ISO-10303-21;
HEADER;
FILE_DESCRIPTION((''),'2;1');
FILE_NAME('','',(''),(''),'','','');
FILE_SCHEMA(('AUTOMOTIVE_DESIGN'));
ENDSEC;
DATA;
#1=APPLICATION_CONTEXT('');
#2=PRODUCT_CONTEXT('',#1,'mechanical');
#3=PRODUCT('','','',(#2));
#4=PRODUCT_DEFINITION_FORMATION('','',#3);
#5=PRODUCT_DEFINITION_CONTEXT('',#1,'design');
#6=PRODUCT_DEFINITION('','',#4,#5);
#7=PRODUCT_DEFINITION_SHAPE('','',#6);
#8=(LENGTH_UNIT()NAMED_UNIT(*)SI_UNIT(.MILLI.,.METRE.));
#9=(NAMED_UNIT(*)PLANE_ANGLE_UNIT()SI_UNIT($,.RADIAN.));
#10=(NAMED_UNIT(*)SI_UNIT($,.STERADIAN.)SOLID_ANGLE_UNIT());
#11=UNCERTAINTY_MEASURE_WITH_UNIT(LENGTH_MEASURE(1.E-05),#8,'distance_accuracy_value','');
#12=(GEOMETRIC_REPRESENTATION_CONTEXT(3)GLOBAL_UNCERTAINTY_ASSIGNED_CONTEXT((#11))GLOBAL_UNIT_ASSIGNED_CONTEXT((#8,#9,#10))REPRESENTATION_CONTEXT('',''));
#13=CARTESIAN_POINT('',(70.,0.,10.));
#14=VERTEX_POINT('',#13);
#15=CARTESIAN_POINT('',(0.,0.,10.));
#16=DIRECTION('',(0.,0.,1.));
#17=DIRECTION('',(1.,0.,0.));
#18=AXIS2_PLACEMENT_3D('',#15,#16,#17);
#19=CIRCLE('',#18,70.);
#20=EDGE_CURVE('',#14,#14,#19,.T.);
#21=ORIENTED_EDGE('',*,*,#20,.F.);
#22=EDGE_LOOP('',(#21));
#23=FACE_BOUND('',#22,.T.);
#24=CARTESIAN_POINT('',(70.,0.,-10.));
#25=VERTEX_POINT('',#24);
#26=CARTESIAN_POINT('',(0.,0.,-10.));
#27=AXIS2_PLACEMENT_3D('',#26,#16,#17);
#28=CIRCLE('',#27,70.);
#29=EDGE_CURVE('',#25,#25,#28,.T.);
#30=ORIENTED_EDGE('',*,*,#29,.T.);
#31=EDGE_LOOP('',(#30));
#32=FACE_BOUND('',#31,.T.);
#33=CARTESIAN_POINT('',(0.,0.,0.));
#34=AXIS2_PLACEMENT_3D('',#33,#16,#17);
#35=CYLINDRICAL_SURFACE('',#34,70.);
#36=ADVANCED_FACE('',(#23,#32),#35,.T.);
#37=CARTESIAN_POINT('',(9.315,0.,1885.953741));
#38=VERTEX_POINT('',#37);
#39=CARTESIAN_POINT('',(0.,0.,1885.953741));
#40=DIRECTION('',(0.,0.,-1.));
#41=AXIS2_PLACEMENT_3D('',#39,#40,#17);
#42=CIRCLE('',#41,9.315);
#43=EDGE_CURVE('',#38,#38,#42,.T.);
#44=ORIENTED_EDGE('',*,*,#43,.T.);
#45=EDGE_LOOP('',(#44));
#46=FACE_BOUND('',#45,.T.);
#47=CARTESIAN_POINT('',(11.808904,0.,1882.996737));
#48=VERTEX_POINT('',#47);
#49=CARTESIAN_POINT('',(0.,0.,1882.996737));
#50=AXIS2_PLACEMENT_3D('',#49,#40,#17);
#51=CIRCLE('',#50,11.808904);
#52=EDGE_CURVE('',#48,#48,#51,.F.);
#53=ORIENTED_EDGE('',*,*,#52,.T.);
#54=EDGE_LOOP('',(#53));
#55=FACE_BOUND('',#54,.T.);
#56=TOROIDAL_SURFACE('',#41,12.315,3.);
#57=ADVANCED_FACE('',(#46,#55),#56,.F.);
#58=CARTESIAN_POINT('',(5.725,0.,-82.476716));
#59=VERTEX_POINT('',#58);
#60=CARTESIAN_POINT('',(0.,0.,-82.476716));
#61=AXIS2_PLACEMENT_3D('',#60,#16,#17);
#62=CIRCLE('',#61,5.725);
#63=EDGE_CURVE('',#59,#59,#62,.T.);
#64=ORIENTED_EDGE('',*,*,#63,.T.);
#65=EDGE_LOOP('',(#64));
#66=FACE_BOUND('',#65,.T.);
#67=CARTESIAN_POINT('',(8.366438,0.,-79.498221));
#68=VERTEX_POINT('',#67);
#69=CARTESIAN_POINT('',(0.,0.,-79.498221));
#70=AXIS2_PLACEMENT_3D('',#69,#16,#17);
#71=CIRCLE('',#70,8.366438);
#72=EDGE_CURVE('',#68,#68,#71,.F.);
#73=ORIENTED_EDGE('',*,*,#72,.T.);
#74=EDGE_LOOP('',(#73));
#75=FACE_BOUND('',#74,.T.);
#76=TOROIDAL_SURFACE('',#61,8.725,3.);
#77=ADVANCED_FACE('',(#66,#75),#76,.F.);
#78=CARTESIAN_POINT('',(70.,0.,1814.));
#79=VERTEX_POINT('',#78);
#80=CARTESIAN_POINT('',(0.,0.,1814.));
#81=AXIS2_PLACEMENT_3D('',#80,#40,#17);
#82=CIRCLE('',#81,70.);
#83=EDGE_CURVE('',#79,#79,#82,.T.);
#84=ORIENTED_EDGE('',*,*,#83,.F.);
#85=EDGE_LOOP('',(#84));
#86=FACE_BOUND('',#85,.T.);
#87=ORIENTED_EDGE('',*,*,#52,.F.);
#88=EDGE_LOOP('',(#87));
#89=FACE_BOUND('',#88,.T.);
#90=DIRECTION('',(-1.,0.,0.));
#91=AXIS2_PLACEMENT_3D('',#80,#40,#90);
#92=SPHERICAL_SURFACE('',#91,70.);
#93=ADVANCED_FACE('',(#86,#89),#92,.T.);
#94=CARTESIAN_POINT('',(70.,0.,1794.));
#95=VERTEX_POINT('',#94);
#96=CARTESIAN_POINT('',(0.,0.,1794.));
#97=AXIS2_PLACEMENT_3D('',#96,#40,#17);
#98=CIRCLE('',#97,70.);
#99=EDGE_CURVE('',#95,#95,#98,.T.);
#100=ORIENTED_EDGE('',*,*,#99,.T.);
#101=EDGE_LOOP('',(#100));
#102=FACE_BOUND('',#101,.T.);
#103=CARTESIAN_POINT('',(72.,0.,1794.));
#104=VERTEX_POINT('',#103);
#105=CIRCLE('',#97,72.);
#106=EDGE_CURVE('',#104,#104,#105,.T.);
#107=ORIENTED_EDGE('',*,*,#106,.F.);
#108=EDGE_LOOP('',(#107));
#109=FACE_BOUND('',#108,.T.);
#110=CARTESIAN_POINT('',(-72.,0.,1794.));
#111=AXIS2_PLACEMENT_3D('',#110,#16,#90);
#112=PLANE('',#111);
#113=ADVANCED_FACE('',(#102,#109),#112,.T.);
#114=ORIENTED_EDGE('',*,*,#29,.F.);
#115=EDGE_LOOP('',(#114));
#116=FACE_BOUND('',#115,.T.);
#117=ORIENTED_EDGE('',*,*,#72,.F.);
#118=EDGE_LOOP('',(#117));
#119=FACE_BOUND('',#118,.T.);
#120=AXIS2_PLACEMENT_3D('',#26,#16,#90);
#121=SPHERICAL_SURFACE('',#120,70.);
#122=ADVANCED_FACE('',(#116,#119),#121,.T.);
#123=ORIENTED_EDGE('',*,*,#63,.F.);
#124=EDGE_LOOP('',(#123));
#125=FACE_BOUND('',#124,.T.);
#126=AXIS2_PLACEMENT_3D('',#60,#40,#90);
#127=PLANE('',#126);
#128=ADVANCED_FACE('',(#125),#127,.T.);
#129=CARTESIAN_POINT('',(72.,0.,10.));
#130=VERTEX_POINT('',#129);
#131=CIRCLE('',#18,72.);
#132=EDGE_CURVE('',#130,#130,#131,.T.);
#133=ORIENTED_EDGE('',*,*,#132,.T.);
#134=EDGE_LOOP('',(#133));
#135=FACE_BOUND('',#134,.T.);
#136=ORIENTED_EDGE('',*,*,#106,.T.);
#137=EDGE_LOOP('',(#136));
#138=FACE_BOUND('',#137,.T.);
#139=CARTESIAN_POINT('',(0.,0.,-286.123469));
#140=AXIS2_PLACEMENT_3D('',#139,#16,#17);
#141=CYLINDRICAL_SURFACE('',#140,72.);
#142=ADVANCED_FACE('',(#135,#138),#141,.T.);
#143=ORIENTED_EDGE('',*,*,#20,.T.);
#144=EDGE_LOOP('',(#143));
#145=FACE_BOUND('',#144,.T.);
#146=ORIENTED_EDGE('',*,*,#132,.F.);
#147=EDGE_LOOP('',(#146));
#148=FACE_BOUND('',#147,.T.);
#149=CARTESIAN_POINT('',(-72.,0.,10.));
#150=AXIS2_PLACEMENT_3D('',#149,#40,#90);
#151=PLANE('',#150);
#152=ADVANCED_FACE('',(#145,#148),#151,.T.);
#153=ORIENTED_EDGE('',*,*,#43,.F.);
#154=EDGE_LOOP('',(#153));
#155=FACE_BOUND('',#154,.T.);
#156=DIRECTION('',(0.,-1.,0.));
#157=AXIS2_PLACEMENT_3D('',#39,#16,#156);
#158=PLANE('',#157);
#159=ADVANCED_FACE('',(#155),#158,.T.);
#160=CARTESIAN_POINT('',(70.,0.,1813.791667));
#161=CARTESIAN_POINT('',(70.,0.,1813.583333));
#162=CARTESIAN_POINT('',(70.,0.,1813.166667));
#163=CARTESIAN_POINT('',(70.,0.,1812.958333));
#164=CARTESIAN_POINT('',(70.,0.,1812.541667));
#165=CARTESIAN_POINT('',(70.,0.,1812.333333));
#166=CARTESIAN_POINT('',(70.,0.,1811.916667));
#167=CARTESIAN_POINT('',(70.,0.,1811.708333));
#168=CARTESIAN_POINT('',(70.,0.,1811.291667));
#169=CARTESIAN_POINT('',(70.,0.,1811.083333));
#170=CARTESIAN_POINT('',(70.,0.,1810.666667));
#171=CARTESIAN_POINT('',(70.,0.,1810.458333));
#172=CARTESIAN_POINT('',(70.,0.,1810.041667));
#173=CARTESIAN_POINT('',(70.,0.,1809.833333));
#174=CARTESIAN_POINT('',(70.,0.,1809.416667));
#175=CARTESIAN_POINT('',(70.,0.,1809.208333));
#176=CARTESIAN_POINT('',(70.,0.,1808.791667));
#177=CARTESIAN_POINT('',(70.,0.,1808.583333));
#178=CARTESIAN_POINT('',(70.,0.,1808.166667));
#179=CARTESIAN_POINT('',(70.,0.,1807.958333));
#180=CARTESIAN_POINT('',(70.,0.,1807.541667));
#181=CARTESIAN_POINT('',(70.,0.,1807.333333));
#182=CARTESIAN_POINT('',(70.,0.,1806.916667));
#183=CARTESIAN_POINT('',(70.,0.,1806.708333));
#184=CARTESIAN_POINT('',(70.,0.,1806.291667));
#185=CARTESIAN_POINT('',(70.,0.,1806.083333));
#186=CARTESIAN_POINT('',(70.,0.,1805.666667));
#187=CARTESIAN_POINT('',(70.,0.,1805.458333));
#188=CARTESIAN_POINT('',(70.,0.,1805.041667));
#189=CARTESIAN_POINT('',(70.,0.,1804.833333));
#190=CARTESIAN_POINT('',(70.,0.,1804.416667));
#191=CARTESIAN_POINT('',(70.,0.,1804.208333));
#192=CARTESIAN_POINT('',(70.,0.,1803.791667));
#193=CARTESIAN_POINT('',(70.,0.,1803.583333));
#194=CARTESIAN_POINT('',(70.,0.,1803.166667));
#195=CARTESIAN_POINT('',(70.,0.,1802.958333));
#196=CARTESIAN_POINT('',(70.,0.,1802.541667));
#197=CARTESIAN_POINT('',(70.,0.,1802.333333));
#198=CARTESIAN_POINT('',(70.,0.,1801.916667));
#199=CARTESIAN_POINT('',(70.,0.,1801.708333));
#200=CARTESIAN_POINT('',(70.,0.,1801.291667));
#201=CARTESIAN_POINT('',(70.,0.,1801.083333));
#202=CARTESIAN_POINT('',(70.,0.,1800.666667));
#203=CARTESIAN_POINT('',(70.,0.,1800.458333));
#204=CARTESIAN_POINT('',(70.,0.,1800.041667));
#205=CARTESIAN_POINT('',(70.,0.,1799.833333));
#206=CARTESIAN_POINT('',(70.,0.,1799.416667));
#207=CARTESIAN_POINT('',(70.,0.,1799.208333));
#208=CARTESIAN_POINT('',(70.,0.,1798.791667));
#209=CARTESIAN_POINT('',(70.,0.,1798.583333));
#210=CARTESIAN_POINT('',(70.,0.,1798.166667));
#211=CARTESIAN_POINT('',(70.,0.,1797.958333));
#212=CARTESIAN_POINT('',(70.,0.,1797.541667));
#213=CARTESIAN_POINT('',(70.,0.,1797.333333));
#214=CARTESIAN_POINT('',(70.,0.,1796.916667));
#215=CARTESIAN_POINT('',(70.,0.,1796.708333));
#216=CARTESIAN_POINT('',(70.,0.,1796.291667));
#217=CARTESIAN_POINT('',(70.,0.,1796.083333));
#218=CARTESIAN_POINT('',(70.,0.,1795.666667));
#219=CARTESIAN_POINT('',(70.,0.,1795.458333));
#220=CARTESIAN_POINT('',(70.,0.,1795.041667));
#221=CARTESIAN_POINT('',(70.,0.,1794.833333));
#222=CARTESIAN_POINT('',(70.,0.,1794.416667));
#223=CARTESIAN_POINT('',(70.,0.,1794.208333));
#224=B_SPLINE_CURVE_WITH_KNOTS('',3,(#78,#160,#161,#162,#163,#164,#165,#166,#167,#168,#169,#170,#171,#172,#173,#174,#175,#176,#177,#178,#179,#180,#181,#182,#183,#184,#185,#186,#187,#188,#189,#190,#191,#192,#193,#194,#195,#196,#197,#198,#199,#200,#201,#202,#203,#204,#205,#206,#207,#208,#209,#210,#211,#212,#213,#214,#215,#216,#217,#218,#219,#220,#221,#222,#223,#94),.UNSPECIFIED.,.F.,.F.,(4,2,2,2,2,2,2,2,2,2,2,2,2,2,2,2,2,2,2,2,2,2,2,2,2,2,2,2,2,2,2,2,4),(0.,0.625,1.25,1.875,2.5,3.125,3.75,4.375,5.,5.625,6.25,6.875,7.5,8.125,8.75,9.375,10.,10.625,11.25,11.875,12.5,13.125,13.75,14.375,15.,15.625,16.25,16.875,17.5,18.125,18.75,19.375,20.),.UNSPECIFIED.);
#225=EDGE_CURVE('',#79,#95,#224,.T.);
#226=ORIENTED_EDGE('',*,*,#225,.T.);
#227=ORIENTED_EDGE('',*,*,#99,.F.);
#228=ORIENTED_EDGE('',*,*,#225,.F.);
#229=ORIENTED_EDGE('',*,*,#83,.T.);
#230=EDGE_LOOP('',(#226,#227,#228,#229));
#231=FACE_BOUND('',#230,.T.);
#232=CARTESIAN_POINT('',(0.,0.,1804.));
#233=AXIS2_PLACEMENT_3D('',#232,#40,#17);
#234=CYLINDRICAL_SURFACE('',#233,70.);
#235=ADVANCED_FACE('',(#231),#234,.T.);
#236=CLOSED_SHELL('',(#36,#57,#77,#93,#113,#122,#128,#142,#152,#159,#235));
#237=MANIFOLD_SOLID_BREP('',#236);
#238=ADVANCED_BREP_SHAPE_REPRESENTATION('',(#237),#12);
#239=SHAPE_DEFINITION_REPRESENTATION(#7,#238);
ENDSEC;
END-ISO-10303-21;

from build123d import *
from OCP.BRepAlgoAPI import BRepAlgoAPI_Cut
from OCP.TopTools import TopTools_ListOfShape

# Parameters (mm, degrees)
BOSS_EXTRUDE1_DEPTH      = 1885.953741
BOSS_EXTRUDE1_DEPTH_BACK = 82.476716
SKETCH1_R                = 72


with BuildPart() as part:
    # Sketch1 → Boss-Extrude1 (new, two sides: drawn at the far end of the back side and taken through both)
    with BuildSketch(Plane.XY.offset(-BOSS_EXTRUDE1_DEPTH_BACK)):
        with Locations(Location((0, 0, 0), (0, 0, 270))):
            Circle(SKETCH1_R)
    extrude(amount=BOSS_EXTRUDE1_DEPTH + BOSS_EXTRUDE1_DEPTH_BACK)


with BuildPart() as cavity3_tool:
    # Cavity3: read off the stored shape, not the designer's step
    # Cavity3 outline → Cavity3 (revolve)
    with BuildSketch(Plane.XZ):
        with BuildLine():
            Line((72, -82.476716089), (72, 10))
            Line((72, 10), (70, 10))
            Line((70, 10), (70, -9.999999977))
            ThreePointArc((70, -9.999999977), (52.371990052, -56.445394367), (8.366438321, -79.498220911))
            ThreePointArc((8.366438321, -79.498220911), (6.48048614, -80.486199187), (5.725, -82.476716089))
            Line((5.725, -82.476716089), (72, -82.476716089))
        make_face()
        with BuildLine():
            Line((70, 1813.99999993), (70, 1794))
            Line((70, 1794), (72, 1794))
            Line((72, 1794), (72, 1885.953740521))
            Line((72, 1885.953740521), (9.315, 1885.953740521))
            ThreePointArc((9.315, 1885.953740521), (10.021717672, 1884.019611217), (11.80890411, 1882.996737486))
            ThreePointArc((11.80890411, 1882.996737486), (53.509920985, 1859.129683759), (70, 1813.99999993))
        make_face()
    revolve(axis=Axis((0, 0, 0), (0, 0, 1)))


with BuildPart() as part_1:
    add(part.part)

    # Cavity3: cut by cavity3_tool, with a tolerance
    cavity3_stock = TopTools_ListOfShape()
    cavity3_stock.Append(part_1.part.wrapped)
    cavity3_tools = TopTools_ListOfShape()
    cavity3_tools.Append(cavity3_tool.part.wrapped)
    cavity3_cut = BRepAlgoAPI_Cut()
    cavity3_cut.SetArguments(cavity3_stock)
    cavity3_cut.SetTools(cavity3_tools)
    cavity3_cut.SetFuzzyValue(0.00001)
    cavity3_cut.Build()
    add(Compound.cast(cavity3_cut.Shape()).solids(), mode=Mode.REPLACE)


solid = part_1.part
